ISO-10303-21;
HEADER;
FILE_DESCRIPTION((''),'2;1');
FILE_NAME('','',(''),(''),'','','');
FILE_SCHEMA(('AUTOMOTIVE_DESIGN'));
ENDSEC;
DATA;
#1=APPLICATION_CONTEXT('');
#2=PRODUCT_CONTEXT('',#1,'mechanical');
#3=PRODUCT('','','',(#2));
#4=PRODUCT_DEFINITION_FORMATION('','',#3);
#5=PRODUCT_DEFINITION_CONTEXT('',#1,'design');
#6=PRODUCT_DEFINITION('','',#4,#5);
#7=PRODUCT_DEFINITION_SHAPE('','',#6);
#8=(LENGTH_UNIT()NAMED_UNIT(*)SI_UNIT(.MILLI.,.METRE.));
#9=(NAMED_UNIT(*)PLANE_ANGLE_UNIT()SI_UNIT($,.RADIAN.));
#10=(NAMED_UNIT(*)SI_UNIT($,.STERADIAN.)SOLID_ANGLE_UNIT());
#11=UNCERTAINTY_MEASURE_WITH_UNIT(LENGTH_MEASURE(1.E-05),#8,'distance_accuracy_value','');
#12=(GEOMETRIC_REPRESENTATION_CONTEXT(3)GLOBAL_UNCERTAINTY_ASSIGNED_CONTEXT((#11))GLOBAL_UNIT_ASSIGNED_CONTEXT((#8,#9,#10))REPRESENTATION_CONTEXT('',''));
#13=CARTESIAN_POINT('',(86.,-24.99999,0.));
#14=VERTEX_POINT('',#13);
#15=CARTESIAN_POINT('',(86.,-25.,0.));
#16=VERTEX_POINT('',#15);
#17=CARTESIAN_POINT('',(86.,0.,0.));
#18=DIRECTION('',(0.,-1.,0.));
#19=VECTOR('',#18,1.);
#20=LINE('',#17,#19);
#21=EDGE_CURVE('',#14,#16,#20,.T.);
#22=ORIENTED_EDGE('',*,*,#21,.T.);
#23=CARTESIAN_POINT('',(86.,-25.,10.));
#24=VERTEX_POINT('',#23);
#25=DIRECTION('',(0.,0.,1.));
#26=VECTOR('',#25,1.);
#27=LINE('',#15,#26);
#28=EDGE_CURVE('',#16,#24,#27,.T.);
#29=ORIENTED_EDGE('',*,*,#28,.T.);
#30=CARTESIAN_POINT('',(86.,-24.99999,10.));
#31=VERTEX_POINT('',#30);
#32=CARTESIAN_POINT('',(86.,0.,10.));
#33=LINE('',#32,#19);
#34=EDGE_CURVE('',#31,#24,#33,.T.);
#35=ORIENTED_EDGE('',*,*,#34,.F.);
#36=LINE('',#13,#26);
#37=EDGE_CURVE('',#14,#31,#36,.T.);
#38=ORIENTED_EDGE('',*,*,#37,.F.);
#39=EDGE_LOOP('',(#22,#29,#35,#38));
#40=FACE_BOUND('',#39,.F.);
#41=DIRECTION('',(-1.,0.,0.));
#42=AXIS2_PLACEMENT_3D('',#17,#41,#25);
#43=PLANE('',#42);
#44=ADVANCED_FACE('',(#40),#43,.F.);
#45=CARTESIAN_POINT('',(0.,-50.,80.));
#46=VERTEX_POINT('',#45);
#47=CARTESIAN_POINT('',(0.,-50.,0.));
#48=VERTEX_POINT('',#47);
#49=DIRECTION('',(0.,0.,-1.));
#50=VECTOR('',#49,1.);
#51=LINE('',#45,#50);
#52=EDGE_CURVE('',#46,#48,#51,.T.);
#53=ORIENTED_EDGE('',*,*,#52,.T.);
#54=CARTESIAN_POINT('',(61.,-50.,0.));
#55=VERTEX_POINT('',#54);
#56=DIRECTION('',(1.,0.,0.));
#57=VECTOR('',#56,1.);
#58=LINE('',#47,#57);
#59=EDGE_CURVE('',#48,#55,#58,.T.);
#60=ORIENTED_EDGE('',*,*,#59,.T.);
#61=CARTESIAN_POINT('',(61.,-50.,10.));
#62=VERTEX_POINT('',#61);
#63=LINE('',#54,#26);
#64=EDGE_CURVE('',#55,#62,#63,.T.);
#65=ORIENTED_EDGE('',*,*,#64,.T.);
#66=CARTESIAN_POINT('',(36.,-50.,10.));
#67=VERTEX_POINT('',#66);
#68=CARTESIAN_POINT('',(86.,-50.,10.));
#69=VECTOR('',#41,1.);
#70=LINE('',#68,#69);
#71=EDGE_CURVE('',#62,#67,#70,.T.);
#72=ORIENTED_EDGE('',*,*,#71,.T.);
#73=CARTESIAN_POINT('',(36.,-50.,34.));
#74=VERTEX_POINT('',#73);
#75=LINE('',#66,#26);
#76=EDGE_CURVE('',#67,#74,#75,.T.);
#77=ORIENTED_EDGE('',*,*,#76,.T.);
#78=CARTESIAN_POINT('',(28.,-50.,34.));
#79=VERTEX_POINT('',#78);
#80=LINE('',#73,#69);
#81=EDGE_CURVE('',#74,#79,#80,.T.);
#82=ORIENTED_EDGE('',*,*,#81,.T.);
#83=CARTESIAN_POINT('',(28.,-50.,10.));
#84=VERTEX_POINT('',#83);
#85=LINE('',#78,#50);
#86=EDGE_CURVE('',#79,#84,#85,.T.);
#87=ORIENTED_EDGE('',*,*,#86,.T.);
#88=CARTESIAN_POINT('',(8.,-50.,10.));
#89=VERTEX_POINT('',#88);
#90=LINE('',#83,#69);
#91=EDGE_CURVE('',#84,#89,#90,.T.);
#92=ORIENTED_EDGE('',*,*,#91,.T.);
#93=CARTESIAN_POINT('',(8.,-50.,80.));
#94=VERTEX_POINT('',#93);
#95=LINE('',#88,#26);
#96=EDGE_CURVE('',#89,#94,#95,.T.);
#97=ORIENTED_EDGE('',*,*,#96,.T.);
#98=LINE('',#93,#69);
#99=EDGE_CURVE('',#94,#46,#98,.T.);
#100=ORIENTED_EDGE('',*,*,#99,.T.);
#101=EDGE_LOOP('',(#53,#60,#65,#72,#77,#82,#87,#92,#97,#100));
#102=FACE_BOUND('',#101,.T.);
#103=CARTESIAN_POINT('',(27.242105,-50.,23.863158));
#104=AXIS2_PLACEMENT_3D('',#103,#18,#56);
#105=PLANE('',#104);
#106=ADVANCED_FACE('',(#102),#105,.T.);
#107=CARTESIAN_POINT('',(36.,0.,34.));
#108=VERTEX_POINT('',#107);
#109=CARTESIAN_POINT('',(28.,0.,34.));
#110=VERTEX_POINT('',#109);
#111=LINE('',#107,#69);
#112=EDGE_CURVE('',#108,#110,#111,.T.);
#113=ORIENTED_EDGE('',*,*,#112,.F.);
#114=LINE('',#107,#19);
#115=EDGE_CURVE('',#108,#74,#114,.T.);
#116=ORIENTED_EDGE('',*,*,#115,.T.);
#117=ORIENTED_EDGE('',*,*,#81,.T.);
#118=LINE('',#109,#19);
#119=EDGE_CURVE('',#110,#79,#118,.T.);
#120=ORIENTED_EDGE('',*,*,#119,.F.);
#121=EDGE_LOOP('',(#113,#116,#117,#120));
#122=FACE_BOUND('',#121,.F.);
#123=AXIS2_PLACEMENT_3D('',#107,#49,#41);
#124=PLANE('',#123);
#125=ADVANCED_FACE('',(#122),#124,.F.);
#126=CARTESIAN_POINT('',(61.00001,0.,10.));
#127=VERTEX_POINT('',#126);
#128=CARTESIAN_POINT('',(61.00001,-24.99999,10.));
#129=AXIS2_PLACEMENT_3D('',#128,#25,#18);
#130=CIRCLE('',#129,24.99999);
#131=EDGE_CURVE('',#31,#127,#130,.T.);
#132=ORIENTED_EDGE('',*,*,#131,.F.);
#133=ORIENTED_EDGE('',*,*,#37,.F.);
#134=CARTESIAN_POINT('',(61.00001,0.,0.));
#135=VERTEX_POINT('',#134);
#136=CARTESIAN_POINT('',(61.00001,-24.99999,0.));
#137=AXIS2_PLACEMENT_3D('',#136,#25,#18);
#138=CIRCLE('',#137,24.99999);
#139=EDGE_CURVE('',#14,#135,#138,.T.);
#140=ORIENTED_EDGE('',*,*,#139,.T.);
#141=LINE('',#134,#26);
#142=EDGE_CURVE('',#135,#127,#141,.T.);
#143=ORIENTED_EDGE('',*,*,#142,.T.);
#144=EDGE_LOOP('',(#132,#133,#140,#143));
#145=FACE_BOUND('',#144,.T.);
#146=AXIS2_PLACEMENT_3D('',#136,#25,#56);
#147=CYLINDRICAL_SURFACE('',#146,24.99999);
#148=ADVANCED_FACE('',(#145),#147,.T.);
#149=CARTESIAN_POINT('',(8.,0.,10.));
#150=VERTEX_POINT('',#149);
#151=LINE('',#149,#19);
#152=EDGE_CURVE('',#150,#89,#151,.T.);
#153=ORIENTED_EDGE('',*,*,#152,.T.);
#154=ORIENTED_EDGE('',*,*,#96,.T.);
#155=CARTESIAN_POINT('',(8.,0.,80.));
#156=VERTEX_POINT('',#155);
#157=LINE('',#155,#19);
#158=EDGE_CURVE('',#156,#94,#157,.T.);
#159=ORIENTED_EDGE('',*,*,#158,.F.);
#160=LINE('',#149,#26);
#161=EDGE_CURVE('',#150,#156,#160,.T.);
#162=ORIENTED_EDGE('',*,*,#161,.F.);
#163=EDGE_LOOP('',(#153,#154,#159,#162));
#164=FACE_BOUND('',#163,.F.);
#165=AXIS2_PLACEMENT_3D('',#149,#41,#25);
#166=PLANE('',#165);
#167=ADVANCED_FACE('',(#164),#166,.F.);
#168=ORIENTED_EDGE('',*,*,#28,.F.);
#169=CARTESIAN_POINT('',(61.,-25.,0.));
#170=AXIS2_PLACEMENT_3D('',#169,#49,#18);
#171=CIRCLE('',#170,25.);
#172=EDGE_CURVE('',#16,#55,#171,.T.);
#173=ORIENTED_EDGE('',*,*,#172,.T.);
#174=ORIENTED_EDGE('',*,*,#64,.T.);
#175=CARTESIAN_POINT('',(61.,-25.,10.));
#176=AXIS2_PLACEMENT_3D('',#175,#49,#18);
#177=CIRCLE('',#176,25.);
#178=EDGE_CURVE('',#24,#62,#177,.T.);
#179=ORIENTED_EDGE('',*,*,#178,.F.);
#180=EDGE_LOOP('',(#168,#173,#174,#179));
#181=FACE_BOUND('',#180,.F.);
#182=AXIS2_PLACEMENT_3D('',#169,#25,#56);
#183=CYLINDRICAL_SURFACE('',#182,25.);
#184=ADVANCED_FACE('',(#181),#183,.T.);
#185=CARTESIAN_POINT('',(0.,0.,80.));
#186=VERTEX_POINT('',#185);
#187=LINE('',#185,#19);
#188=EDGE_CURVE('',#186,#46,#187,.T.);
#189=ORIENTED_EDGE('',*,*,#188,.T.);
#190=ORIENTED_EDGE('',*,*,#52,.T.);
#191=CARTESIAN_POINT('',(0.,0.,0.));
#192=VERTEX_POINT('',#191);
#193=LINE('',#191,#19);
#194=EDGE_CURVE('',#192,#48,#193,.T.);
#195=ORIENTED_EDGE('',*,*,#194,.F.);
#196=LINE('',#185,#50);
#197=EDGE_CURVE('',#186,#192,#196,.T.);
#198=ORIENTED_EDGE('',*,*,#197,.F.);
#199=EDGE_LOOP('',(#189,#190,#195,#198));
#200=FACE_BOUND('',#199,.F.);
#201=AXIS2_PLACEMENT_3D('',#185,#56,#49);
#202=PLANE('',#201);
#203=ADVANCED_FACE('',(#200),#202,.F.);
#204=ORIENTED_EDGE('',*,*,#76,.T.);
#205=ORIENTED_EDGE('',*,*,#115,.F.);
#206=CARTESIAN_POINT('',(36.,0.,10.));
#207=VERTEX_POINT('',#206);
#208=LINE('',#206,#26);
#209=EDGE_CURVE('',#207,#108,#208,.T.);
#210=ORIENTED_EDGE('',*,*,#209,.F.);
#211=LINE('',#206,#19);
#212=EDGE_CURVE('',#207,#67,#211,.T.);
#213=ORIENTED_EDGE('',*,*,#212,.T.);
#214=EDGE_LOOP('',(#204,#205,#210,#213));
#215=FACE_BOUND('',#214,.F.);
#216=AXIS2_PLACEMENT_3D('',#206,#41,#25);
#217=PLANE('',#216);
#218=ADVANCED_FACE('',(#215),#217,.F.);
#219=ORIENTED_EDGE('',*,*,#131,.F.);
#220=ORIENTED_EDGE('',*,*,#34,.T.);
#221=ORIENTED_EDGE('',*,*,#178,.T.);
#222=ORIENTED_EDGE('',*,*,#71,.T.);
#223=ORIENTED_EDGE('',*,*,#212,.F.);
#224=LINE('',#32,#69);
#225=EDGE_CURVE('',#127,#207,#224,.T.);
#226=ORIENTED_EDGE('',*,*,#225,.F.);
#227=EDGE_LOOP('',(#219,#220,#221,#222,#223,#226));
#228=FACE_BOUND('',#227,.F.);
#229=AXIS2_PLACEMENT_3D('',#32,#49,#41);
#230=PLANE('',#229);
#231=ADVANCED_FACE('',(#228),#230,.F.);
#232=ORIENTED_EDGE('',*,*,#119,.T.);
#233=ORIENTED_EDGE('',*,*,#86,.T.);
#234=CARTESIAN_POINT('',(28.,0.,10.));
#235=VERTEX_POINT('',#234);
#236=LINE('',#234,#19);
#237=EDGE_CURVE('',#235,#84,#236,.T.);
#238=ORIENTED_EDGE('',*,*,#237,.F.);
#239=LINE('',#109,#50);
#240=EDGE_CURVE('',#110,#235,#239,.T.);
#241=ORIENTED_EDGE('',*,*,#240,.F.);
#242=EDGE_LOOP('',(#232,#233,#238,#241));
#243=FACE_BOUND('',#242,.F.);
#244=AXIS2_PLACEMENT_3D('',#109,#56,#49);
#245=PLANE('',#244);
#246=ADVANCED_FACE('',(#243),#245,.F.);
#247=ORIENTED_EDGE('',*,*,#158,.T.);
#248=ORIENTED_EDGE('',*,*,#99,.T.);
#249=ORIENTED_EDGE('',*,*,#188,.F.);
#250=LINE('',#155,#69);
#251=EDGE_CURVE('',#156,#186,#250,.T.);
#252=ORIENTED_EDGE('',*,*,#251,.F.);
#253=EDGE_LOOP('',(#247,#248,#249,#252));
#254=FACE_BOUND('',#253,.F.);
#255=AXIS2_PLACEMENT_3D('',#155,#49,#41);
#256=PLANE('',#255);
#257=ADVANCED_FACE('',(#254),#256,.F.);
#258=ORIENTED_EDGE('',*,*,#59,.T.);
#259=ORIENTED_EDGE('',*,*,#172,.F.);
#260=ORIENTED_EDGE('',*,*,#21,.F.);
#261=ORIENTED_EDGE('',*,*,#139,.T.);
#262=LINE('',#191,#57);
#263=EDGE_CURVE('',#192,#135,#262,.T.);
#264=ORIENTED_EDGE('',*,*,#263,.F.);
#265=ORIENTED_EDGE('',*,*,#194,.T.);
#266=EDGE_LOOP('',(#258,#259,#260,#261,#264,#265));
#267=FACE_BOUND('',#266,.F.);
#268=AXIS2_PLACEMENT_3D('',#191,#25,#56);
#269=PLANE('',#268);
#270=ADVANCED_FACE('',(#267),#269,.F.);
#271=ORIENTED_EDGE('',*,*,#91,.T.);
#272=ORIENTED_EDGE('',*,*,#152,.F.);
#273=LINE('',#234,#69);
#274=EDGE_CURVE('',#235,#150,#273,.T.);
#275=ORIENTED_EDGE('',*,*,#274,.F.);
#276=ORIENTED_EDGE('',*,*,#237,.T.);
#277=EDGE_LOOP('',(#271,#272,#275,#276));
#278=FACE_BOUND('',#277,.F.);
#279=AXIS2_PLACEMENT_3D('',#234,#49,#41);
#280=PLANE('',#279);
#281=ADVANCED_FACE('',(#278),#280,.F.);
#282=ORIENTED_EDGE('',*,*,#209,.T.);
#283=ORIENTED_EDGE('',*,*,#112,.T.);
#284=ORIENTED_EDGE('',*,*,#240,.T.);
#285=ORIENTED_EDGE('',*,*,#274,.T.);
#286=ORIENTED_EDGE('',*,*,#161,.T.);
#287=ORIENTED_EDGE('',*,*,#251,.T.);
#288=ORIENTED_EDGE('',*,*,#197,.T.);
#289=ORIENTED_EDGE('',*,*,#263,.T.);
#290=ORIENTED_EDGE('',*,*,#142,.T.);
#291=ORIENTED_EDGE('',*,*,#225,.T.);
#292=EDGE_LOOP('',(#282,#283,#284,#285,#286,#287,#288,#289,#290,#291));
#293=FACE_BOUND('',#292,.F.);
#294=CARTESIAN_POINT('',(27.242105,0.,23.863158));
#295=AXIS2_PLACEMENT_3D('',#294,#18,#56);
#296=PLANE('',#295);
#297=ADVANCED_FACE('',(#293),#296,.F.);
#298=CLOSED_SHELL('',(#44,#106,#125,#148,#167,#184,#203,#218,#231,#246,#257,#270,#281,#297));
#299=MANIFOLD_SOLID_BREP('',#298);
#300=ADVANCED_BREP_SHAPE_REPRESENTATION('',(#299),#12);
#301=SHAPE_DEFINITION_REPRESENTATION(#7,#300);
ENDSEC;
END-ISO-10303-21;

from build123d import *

# Parameters (mm, degrees)
F2_DEPTH = 50
F3_R     = 25
F4_R     = 24.99999


# Not quite as in the source:
# - a fillet or chamfer is up to 0.001 mm smaller than in the source, because OpenCascade refuses the exact size


with BuildPart() as f2:
    # F1 (on face) → F2 (new body)
    with BuildSketch(Plane.XZ):
        Polygon((8, 80), (0, 80), (0, 0), (86, 0), (86, 10), (61, 10), (36, 10), (36, 34), (28, 34), (28, 10), (8, 10), align=None)
    extrude(amount=F2_DEPTH)

    # F3
    f3_edges = [f2.edges().sort_by_distance(p)[0] for p in [
        (86, -50, 5),
    ]]
    fillet(f3_edges, radius=F3_R)

    # F4 (radius 25 in the source; OpenCascade refuses exactly that, so slightly less here)
    f4_edges = [f2.edges().sort_by_distance(p)[0] for p in [
        (86, 0, 5),
    ]]
    fillet(f4_edges, radius=F4_R)


solid = f2.part
